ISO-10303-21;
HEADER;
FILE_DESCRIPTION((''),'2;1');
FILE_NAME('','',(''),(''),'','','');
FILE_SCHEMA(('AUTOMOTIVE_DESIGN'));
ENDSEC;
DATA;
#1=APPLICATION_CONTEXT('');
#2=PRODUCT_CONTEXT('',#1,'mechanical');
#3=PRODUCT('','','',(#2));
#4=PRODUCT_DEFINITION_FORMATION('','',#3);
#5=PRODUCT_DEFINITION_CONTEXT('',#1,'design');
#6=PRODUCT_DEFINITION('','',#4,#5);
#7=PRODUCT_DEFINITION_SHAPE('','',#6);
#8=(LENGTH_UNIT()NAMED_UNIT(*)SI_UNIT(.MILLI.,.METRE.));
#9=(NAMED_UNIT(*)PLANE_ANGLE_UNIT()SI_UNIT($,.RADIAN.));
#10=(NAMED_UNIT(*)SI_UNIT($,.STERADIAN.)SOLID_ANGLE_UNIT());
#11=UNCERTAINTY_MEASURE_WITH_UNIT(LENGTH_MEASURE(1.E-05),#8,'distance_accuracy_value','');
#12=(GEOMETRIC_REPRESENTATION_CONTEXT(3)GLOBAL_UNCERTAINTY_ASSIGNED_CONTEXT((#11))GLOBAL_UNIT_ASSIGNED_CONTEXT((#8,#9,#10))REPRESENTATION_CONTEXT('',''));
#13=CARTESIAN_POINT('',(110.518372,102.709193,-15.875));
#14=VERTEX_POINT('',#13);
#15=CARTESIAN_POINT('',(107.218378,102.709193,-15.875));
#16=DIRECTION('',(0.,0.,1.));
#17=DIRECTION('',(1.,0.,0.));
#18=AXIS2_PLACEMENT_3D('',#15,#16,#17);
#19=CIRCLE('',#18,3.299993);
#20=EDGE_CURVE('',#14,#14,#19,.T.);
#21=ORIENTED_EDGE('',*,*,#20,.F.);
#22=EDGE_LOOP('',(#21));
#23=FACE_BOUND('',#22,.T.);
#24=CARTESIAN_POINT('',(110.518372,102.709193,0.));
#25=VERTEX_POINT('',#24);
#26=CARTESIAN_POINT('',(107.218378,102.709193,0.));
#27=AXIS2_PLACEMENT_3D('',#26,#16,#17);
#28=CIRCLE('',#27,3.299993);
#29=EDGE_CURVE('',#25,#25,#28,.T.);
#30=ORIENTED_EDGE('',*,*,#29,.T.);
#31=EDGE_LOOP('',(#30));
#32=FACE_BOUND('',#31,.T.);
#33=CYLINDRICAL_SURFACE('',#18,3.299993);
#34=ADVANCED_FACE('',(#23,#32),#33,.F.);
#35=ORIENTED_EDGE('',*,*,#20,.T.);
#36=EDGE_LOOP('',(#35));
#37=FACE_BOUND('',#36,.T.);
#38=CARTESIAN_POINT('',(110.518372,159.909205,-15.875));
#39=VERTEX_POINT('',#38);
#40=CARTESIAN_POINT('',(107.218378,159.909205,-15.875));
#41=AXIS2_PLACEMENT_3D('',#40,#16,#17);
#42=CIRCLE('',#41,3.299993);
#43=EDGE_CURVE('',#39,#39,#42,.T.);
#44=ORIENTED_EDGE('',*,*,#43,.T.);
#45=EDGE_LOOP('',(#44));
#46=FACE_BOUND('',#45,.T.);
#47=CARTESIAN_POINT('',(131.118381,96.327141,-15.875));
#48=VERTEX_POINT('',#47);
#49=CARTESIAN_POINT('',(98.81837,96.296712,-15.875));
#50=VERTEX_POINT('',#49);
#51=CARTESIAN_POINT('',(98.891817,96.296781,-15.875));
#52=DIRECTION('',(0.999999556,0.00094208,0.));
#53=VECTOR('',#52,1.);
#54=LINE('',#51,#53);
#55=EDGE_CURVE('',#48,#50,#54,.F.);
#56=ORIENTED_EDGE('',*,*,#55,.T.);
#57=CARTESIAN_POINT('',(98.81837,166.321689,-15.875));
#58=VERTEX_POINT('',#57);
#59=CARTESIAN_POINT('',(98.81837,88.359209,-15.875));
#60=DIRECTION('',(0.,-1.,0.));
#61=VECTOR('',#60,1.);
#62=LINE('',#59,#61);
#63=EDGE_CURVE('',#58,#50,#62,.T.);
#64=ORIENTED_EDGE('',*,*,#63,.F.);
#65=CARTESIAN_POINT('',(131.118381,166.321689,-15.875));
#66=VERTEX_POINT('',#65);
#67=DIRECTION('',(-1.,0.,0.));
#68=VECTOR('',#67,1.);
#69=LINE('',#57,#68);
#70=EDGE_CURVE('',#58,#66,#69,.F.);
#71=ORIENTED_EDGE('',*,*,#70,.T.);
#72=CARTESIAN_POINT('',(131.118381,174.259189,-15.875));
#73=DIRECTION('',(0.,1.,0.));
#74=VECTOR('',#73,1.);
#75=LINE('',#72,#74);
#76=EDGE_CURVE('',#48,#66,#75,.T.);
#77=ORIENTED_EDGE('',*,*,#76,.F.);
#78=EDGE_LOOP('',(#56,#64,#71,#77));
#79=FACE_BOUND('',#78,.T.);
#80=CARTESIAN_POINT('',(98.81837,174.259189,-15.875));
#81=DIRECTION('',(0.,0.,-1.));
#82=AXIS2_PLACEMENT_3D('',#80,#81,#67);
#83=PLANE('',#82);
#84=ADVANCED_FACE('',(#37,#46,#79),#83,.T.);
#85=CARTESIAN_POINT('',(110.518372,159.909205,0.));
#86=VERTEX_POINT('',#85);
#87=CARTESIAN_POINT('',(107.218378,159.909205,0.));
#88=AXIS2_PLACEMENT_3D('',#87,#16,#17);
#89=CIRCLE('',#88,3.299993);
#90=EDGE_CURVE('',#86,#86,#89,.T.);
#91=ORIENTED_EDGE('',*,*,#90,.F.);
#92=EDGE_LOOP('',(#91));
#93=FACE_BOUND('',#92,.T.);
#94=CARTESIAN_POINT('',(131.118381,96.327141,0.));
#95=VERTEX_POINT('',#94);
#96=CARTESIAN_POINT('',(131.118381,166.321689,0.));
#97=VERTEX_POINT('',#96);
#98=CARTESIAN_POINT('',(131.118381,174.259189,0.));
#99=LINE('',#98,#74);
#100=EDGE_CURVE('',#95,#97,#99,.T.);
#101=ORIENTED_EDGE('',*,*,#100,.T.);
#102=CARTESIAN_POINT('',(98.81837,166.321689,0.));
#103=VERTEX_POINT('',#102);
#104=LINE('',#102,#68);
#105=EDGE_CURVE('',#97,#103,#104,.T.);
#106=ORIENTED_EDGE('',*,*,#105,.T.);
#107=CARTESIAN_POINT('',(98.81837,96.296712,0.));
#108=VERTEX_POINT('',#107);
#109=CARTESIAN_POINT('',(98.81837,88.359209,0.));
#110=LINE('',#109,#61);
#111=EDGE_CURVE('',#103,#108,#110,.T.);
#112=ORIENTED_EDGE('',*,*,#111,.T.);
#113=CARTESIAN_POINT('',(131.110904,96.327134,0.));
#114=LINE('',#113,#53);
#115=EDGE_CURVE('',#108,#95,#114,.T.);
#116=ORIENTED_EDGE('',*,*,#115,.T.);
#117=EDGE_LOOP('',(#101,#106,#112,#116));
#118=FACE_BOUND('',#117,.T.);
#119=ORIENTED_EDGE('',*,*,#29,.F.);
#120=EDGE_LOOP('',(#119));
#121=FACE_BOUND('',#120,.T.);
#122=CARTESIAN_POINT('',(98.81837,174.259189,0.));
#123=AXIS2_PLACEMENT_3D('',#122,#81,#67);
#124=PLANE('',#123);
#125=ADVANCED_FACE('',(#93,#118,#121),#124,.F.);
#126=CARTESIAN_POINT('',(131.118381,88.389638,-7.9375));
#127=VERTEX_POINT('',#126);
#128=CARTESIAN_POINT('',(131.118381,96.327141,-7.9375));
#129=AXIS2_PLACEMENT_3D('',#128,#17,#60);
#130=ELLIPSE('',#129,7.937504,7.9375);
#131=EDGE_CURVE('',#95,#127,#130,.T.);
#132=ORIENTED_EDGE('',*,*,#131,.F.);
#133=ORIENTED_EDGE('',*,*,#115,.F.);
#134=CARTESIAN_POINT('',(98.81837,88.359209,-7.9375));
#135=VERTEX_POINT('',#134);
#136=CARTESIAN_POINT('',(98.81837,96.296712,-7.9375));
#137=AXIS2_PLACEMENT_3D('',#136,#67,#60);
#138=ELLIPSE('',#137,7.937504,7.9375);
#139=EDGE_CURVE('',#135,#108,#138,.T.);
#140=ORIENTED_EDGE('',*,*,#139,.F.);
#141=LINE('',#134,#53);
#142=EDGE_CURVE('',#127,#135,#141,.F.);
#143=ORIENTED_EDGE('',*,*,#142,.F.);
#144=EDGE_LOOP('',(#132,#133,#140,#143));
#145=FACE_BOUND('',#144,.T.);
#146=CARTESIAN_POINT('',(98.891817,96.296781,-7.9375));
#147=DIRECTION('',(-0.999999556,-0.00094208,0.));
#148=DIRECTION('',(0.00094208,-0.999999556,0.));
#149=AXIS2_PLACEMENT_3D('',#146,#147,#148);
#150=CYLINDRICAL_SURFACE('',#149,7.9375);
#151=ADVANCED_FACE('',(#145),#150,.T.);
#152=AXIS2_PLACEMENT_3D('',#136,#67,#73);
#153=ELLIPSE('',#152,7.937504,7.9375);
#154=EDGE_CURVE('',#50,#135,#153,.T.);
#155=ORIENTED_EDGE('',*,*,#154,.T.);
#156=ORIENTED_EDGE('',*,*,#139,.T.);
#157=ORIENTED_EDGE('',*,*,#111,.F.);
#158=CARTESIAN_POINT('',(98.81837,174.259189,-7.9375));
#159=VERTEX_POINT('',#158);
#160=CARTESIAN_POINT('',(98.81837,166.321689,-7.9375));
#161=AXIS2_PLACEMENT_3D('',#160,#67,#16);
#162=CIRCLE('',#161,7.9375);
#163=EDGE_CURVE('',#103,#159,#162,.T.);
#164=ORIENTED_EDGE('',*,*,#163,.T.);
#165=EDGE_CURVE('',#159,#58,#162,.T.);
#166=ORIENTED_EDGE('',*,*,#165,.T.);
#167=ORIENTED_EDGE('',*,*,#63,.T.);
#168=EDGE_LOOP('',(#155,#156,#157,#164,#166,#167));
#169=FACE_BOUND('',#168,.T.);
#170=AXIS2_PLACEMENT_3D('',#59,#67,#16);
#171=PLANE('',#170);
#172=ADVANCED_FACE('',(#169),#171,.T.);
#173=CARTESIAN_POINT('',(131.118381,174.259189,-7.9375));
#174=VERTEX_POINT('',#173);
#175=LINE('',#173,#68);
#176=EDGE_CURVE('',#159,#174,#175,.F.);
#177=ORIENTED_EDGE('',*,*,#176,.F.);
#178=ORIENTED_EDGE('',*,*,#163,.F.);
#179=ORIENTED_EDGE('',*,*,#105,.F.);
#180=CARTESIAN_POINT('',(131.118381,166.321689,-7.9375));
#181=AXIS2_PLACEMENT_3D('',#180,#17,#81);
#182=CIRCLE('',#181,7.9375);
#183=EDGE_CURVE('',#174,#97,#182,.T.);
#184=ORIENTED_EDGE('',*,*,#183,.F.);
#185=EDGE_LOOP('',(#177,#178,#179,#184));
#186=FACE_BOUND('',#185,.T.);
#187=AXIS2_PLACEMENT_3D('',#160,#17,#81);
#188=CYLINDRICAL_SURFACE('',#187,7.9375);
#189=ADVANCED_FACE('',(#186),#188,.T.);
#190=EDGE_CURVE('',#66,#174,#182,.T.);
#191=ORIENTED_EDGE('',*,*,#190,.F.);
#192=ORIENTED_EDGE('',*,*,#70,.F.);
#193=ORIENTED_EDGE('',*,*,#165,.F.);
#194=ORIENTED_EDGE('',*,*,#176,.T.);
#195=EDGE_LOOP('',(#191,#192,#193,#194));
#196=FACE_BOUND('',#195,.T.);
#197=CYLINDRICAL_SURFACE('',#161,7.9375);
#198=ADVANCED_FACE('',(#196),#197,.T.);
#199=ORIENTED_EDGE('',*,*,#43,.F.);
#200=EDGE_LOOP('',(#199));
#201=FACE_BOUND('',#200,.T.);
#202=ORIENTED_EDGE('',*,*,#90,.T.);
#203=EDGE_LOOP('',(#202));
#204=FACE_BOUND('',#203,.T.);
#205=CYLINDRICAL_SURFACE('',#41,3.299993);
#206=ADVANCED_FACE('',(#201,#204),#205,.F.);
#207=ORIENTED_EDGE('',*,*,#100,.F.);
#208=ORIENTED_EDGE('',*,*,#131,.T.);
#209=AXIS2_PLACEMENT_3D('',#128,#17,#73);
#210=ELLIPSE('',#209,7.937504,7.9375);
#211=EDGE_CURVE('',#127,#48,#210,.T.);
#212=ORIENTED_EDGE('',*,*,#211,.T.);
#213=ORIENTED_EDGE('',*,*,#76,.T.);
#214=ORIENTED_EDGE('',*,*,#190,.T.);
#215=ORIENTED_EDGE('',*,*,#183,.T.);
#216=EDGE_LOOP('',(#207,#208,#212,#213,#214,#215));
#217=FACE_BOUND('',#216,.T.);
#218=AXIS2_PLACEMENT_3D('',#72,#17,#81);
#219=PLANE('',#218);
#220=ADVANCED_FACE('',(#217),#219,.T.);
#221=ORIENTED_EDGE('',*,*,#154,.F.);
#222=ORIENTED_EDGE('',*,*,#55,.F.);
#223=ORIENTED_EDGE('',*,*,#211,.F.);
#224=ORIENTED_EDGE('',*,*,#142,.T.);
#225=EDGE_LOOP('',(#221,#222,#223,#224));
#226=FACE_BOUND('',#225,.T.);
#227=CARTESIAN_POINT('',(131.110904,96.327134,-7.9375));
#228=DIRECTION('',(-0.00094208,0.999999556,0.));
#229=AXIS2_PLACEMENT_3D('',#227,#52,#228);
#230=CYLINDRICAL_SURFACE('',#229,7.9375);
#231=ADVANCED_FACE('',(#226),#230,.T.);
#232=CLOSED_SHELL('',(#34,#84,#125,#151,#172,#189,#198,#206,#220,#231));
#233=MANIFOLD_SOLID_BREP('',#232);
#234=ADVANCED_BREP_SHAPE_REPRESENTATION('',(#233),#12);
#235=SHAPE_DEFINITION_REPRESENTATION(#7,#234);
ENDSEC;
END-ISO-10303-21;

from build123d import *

# Parameters (mm, degrees)
SKETCH1_R      = 3.2999934
EXTRUDE1_DEPTH = 15.875
FILLET1_R      = 7.9375


with BuildPart() as part:
    # Sketch1 → Extrude1 (new body)
    with BuildSketch(Plane.XY):
        Polygon((131.1183814, 88.3896378), (98.8183698, 88.3592086), (98.8183698, 174.2591892), (131.1183814, 174.2591892), align=None)
        with Locations((107.2183784, 102.7091926)):
            Circle(SKETCH1_R, mode=Mode.SUBTRACT)
        with Locations((107.2183784, 159.9092052)):
            Circle(SKETCH1_R, mode=Mode.SUBTRACT)
    extrude(amount=-EXTRUDE1_DEPTH)

    # Fillet1
    fillet1_edges = [part.edges().sort_by_distance(p)[0] for p in [
        (114.9683756, 88.3744232, -15.875),
        (114.9683756, 88.3744232, 0),
        (114.9683756, 174.2591892, -15.875),
        (114.9683756, 174.2591892, 0),
    ]]
    fillet(fillet1_edges, radius=FILLET1_R - 0.0001)  # a hair under: the kernel refuses the full size


solid = part.part
